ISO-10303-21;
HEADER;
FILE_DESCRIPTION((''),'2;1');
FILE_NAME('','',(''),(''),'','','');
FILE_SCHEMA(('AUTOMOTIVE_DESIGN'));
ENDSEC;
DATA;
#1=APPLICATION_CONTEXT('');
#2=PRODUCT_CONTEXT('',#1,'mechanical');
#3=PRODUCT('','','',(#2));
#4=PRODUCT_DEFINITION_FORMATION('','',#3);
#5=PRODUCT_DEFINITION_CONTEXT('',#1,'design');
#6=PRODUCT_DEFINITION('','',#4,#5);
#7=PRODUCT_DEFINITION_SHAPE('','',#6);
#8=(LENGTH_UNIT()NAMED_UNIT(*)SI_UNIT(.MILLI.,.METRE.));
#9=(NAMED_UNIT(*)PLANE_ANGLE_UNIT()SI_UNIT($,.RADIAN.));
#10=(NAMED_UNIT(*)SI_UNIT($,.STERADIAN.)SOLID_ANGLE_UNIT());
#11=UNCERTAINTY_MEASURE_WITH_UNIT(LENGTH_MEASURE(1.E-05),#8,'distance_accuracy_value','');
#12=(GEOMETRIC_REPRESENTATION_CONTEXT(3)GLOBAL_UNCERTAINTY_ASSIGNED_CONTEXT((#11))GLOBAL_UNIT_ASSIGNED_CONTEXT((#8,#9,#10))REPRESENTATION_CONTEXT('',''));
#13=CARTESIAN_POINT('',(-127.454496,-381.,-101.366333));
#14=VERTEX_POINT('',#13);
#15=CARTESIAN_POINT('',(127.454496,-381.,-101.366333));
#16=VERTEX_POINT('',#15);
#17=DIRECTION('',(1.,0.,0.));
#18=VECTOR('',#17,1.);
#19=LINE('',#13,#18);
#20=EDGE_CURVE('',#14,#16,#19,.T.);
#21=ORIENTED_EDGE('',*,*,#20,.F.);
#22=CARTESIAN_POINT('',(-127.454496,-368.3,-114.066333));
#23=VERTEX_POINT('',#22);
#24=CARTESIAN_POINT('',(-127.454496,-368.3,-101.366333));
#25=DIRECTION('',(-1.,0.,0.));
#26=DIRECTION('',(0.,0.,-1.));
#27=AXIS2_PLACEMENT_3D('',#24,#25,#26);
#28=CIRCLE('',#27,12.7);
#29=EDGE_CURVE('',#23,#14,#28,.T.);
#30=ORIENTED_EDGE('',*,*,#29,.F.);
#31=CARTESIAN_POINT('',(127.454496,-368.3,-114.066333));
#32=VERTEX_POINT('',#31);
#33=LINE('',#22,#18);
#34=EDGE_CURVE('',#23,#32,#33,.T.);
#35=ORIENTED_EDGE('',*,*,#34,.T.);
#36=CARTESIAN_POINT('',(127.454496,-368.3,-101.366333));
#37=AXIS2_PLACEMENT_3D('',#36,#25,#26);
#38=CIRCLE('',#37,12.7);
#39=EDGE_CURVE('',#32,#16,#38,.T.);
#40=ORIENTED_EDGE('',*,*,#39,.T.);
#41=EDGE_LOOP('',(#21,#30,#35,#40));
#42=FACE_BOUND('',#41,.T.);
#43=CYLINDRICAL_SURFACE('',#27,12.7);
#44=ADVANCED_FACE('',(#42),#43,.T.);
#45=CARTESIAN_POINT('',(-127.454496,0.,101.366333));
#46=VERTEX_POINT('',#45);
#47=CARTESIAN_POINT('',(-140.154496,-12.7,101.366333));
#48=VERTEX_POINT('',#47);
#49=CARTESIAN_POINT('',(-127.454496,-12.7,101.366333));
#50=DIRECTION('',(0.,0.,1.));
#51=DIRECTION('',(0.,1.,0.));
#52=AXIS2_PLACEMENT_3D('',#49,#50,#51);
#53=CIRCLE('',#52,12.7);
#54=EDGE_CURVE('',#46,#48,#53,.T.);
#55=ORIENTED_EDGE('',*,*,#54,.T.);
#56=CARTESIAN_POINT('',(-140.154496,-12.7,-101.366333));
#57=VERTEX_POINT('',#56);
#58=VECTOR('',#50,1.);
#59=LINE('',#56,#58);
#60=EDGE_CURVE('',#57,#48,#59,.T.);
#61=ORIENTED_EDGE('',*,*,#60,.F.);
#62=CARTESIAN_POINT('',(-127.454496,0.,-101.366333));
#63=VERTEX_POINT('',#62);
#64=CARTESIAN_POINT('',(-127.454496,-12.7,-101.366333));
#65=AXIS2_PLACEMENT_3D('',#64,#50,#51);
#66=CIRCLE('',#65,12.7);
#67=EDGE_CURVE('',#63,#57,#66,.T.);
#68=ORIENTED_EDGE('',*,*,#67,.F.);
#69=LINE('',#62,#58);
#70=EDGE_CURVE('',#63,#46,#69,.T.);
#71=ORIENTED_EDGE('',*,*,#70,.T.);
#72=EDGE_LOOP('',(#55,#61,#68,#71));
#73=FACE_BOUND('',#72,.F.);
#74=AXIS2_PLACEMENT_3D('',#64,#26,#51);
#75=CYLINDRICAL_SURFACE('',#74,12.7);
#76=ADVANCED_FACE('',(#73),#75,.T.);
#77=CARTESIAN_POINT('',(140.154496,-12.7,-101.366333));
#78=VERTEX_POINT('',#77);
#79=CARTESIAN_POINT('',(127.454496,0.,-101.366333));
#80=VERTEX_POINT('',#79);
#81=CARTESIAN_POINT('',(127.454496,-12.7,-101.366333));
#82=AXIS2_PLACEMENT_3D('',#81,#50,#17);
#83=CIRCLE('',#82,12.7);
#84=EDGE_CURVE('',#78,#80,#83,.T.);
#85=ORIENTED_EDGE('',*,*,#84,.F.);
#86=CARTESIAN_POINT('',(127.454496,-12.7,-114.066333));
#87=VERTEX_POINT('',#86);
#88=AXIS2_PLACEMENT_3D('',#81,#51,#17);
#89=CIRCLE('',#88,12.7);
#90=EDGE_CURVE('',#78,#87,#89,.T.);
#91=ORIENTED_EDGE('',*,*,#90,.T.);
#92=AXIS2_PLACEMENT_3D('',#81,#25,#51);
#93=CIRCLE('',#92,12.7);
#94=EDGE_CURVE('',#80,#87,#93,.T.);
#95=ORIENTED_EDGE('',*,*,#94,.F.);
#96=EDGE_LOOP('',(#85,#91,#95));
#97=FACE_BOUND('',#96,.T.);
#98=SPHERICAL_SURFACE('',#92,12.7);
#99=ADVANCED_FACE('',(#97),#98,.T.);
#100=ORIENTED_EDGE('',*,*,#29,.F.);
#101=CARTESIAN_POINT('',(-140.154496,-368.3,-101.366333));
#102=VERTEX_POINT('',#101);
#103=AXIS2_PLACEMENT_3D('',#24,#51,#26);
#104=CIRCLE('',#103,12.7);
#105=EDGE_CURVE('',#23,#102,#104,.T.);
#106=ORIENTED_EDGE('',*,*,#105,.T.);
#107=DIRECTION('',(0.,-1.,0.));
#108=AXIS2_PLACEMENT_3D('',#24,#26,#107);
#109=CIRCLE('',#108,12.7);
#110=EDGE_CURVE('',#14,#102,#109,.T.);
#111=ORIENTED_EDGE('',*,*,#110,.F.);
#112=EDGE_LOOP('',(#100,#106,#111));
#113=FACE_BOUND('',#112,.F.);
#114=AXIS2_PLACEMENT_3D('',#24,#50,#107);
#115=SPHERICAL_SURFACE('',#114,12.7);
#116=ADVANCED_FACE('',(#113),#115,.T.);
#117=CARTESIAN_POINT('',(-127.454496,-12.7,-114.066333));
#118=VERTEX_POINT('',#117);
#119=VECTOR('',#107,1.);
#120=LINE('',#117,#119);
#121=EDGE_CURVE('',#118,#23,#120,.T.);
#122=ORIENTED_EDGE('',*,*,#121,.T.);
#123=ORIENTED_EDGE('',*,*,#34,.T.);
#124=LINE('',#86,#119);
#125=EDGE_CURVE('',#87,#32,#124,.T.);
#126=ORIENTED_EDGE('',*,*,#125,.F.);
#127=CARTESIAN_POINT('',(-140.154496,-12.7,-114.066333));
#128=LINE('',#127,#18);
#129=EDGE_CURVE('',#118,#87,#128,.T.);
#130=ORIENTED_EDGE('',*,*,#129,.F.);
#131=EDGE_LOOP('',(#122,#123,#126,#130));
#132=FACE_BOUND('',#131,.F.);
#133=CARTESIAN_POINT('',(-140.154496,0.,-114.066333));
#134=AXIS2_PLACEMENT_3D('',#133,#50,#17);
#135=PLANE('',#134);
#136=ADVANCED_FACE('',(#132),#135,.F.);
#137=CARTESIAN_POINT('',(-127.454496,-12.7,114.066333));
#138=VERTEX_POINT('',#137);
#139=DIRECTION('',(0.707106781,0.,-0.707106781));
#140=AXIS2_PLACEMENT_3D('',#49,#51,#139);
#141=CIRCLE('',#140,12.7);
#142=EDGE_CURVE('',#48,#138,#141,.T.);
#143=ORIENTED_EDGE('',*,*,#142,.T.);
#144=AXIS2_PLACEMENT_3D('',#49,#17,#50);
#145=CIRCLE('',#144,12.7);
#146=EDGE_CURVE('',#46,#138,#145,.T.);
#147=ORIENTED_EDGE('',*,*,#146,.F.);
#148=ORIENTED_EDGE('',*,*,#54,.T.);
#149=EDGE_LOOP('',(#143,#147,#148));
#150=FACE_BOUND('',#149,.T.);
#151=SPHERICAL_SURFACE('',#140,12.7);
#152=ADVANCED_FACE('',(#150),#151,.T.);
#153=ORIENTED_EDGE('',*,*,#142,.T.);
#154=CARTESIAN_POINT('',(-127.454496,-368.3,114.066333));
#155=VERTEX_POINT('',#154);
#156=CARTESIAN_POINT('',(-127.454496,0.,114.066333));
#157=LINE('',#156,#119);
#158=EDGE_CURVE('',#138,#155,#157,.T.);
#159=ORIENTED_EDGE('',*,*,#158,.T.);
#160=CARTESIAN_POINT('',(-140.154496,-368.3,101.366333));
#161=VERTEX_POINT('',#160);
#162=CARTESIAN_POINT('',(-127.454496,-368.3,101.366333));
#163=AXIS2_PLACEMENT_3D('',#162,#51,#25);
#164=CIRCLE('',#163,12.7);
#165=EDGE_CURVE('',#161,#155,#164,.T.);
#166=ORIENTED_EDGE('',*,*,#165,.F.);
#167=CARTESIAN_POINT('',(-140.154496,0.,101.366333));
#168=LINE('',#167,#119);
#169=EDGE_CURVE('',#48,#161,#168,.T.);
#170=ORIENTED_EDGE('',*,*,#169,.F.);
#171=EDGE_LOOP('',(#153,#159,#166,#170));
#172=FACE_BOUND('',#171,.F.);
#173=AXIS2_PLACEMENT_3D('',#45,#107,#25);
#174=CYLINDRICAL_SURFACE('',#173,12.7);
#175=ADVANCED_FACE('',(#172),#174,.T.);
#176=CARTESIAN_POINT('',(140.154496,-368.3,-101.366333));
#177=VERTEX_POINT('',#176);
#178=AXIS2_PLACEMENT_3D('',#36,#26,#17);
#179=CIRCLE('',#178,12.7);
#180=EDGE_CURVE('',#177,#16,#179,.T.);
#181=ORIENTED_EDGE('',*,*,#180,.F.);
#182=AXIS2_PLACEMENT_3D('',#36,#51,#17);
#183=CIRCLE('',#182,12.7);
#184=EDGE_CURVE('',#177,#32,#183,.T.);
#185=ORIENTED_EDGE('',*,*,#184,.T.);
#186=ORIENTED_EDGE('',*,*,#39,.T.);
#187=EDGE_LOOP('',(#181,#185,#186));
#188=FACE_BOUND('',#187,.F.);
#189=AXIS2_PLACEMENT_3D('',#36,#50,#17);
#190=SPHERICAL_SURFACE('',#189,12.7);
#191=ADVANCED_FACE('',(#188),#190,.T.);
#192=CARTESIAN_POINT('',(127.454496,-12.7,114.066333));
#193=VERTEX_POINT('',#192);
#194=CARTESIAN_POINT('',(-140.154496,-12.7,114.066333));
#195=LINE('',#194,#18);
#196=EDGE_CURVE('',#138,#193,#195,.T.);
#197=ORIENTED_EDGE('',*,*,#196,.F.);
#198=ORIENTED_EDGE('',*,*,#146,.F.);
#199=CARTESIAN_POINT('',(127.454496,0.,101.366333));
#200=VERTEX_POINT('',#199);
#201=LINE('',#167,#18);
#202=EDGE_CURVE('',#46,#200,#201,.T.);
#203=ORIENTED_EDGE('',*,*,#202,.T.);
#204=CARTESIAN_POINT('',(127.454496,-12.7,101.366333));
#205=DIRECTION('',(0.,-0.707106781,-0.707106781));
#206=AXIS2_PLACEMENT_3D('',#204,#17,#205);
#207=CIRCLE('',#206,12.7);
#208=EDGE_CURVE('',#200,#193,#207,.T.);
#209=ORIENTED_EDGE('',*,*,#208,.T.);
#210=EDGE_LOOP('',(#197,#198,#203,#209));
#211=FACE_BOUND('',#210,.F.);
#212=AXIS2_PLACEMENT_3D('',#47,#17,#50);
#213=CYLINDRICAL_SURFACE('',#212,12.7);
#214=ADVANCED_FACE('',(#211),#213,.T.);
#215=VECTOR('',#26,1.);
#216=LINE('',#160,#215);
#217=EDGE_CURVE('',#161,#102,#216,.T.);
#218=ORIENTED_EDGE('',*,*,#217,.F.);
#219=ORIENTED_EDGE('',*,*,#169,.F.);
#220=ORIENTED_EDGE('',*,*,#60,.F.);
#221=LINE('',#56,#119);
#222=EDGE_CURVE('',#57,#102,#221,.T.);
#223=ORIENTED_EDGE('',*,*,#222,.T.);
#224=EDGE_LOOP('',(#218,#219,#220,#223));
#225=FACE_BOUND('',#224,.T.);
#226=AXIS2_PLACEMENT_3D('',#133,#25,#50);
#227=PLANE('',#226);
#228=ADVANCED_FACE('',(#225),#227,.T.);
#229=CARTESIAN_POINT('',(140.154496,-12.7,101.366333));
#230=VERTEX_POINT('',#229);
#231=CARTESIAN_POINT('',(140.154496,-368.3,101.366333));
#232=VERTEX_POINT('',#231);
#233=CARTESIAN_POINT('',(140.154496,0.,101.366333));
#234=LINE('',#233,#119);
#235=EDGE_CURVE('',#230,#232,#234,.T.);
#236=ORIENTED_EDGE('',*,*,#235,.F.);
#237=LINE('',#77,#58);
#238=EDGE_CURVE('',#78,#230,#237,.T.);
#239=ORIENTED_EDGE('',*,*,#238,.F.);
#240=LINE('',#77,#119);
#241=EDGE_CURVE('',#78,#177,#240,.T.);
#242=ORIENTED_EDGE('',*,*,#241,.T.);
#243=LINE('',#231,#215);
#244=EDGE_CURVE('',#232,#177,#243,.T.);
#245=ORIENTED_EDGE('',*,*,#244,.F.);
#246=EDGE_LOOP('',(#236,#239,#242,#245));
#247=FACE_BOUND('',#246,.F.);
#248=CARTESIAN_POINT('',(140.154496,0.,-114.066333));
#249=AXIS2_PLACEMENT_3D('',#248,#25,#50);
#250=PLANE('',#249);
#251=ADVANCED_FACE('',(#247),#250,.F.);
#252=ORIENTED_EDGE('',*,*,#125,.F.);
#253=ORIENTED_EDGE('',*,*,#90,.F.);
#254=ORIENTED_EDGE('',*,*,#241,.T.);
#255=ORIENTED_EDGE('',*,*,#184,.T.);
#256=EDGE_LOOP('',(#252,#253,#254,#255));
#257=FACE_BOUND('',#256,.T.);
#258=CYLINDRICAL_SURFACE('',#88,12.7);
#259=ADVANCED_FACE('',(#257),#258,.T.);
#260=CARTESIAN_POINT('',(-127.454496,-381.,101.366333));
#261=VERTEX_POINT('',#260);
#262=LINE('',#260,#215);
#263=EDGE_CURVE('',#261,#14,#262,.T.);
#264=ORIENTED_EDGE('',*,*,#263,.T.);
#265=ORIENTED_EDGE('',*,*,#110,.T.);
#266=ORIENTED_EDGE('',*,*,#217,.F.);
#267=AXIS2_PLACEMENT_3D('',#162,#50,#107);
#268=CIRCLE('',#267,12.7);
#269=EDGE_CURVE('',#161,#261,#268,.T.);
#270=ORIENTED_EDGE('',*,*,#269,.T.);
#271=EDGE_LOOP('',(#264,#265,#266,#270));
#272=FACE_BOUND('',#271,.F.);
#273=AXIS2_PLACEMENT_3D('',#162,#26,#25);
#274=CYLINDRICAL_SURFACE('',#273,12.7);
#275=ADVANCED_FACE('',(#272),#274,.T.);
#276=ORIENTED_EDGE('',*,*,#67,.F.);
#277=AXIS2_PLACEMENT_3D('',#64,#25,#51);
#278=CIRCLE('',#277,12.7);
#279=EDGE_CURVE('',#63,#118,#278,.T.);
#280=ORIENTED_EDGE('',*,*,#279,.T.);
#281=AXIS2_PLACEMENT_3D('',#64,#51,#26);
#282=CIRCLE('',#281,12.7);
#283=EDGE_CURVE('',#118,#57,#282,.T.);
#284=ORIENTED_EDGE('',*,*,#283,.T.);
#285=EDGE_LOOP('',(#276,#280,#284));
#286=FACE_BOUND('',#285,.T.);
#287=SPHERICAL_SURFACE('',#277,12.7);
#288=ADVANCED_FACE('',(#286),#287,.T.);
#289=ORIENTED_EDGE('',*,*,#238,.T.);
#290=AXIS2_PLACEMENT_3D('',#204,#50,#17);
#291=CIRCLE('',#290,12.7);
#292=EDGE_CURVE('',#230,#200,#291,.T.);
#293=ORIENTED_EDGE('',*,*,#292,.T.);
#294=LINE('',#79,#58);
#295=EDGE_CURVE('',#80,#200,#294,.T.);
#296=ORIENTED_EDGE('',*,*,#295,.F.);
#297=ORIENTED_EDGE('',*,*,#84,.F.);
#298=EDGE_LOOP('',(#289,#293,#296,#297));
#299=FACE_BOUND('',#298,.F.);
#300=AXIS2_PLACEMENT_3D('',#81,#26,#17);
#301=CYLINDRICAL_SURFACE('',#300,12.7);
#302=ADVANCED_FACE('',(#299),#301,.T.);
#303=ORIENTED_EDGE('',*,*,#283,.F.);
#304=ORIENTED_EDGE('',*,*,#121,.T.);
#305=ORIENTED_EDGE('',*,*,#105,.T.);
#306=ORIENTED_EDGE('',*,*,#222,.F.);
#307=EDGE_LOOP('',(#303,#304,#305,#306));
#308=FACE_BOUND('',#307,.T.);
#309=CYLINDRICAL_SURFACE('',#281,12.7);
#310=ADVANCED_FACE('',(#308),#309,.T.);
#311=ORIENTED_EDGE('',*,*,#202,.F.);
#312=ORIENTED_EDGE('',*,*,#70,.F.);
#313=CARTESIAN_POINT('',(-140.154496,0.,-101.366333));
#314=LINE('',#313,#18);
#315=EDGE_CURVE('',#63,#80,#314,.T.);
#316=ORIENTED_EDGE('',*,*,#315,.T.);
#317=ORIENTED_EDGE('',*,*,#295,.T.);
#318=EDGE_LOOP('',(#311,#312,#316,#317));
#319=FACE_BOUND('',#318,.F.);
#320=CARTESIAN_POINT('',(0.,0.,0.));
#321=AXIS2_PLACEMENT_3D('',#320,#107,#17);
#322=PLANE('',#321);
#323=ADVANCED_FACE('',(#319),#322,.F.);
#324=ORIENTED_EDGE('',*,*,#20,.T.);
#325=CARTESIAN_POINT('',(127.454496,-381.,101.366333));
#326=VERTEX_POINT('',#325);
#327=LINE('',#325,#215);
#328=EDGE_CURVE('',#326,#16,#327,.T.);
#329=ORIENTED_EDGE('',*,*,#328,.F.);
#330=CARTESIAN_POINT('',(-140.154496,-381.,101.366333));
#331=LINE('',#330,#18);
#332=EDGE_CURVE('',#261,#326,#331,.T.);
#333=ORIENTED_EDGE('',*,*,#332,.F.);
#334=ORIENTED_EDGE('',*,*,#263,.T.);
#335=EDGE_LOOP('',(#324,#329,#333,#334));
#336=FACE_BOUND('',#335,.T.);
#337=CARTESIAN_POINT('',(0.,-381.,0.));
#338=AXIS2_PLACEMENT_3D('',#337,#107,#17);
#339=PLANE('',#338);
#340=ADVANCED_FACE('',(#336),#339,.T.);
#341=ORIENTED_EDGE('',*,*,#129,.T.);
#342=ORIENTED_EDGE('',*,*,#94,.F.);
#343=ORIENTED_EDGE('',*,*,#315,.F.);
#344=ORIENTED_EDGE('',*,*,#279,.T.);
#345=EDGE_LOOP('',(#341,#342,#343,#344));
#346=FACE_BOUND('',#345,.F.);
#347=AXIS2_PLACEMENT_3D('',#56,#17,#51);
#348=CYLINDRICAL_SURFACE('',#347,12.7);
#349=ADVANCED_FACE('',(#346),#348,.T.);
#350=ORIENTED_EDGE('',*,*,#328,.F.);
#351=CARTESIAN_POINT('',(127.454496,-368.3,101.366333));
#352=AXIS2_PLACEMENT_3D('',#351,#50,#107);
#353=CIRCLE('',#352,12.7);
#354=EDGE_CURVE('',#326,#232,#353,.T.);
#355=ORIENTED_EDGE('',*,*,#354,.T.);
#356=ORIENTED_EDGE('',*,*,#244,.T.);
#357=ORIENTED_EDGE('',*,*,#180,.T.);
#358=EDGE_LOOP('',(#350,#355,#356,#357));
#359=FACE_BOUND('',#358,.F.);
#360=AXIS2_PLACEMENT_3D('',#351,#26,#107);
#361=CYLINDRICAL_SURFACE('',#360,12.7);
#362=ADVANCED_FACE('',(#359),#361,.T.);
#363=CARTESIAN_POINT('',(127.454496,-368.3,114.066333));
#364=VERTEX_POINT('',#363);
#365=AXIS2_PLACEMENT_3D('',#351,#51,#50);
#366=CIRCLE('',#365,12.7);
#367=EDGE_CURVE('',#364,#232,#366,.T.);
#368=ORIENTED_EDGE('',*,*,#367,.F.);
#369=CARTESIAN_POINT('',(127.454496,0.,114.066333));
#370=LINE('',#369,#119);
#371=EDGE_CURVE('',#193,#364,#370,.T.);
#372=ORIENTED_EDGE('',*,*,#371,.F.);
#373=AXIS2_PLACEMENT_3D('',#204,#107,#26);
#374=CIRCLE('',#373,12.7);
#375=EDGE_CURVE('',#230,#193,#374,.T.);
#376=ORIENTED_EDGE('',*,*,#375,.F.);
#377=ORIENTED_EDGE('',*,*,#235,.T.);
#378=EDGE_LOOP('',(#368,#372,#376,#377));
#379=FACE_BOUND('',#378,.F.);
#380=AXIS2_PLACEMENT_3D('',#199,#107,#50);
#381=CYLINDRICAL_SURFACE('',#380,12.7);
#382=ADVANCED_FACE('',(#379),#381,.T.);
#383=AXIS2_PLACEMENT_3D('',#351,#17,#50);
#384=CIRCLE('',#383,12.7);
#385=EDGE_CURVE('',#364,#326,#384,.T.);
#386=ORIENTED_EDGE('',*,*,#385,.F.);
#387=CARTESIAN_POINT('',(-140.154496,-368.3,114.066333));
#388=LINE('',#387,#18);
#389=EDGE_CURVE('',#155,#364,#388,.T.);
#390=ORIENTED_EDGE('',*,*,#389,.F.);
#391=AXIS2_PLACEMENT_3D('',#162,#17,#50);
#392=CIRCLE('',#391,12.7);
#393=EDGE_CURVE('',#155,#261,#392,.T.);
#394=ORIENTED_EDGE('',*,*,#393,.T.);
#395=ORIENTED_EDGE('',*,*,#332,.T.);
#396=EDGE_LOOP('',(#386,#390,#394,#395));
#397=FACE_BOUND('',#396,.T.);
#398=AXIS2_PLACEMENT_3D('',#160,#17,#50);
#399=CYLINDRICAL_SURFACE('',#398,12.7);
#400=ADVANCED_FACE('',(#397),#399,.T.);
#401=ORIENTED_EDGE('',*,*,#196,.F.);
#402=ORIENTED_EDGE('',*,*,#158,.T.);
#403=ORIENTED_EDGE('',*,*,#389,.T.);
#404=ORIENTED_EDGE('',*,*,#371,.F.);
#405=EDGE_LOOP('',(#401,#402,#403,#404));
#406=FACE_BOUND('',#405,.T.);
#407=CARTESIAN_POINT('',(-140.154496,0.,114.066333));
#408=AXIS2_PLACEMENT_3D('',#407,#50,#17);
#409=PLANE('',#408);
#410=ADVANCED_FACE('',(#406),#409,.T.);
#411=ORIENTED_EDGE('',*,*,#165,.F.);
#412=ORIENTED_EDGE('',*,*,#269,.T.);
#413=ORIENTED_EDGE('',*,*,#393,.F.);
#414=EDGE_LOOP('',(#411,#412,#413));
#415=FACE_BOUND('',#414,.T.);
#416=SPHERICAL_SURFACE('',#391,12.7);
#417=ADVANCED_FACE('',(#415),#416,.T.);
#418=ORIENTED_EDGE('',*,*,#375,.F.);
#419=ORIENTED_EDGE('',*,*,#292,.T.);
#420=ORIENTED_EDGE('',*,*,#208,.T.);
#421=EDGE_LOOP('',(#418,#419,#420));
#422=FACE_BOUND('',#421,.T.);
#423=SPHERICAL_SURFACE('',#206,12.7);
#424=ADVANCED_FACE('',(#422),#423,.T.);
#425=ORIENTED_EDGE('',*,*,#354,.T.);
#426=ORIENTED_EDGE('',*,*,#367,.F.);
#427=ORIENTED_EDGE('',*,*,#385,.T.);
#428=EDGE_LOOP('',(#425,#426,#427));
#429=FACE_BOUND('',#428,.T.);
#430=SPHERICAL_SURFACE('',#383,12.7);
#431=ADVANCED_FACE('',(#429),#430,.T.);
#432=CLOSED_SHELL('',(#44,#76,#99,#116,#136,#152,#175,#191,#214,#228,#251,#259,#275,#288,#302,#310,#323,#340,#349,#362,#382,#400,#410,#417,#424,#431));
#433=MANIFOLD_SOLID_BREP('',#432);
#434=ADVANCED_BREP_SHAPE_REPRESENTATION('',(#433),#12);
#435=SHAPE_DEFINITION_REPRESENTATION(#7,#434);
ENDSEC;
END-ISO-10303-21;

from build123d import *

# Parameters (mm, degrees)
F0_W         = 280.3089916706
F0_H         = 228.1326651573
F1_DEPTH     = 381
F2_R         = 12.7
F3_R         = 12.7
F4_R         = 12.7
F5_T1_DEPTH  = 202.7326651573
F5_T3_DEPTH  = 355.6
F5_T5_DEPTH  = 254.9089916706
F5_S9_W      = 12.7
F5_S9_H      = 12.7
F5_T10_DEPTH = 12.7
F5_S15_W     = 12.7
F5_S15_H     = 12.7
F5_T16_DEPTH = 12.7
F5_T20_ANGLE = 90
F5_T22_ANGLE = 90
F5_T24_ANGLE = 90
F5_T26_ANGLE = 90


# Not quite as in the source:
# - a fillet or chamfer that OpenCascade refuses, or shapes differently, is made with other operations: its cross-section is extruded or revolved along the edge and cut away or added


with BuildPart() as f1:
    # F0 (on Front) → F1 (new body)
    with BuildSketch(Plane.XZ):
        Rectangle(F0_W, F0_H)
    extrude(amount=F1_DEPTH)

    # F2
    f2_edges = [f1.edges().sort_by_distance(p)[0] for p in [
        (0, -381, 114.066333),
    ]]
    fillet(f2_edges, radius=F2_R)

    # F3
    f3_edges = [f1.edges().sort_by_distance(p)[0] for p in [
        (140.154496, -184.15, 114.066333),
        (0, 0, 114.066333),
        (-140.154496, -184.15, 114.066333),
    ]]
    fillet(f3_edges, radius=F3_R)

    # F4
    f4_edges = [f1.edges().sort_by_distance(p)[0] for p in [
        (0, 0, -114.066333),
    ]]
    fillet(f4_edges, radius=F4_R)

    # F5: fillet of radius 12.7 on 1 edges, made by hand

    # F5_s2 → F5_t1 (cut)
    with BuildSketch(Plane.XY.offset(-101.3663325787)):
        with BuildLine():
            ThreePointArc((-127.4544958353, 0), (-136.4347519564, -3.7197438789), (-140.1544958353, -12.7))
            Line((-140.1544958353, -12.7), (-140.1544958353, 0))
            Line((-140.1544958353, 0), (-127.4544958353, 0))
        make_face()
        with BuildLine():
            ThreePointArc((140.1544958353, -12.7), (136.4347519564, -3.7197438789), (127.4544958353, 0))
            Line((127.4544958353, 0), (140.1544958353, 0))
            Line((140.1544958353, 0), (140.1544958353, -12.7))
        make_face()
    extrude(amount=F5_T1_DEPTH, mode=Mode.SUBTRACT)

    # F5_s4 → F5_t3 (cut)
    with BuildSketch(Plane.XZ.offset(12.7)):
        with BuildLine():
            ThreePointArc((-127.4544958353, -114.0663325787), (-136.4347519564, -110.3465886997), (-140.1544958353, -101.3663325787))
            Line((-140.1544958353, -101.3663325787), (-140.1544958353, -114.0663325787))
            Line((-140.1544958353, -114.0663325787), (-127.4544958353, -114.0663325787))
        make_face()
        with BuildLine():
            ThreePointArc((140.1544958353, -101.3663325787), (136.4347519564, -110.3465886997), (127.4544958353, -114.0663325787))
            Line((127.4544958353, -114.0663325787), (140.1544958353, -114.0663325787))
            Line((140.1544958353, -114.0663325787), (140.1544958353, -101.3663325787))
        make_face()
    extrude(amount=F5_T3_DEPTH, mode=Mode.SUBTRACT)

    # F5_s6 → F5_t5 (cut)
    with BuildSketch(Plane.YZ.offset(-127.4544958353)):
        with BuildLine():
            ThreePointArc((-368.3, -114.0663325787), (-377.2802561211, -110.3465886997), (-381, -101.3663325787))
            Line((-381, -101.3663325787), (-381, -114.0663325787))
            Line((-381, -114.0663325787), (-368.3, -114.0663325787))
        make_face()
    extrude(amount=F5_T5_DEPTH, mode=Mode.SUBTRACT)


with BuildPart() as f5_tool8:
    # F5_s9 → F5_t10 (new body)
    with BuildSketch(Plane.XZ.offset(12.7)):
        with Locations((-133.8044958353, 107.7163325787)):
            Rectangle(F5_S9_W, F5_S9_H)
    extrude(amount=-F5_T10_DEPTH)

    # F5_s11 → F5_t12 (revolve, cut)
    with BuildSketch(Plane(origin=(-127.4544958353, -12.7, 101.3663325787), x_dir=(0.7071067812, 0, -0.7071067812), z_dir=(0.7071067812, 0, 0.7071067812))):
        with BuildLine():
            ThreePointArc((0, -12.7), (12.7, 0), (0, 12.7))
            Line((0, 12.7), (0, -12.7))
        make_face()
    revolve(axis=Axis((-127.4544958353, -12.7, 101.3663325787), (0, 1, 0)), mode=Mode.SUBTRACT)


with BuildPart() as f1_1:
    add(f1.part)

    # F5_t7: cut F5_tool8
    add(f5_tool8.part, mode=Mode.SUBTRACT)


with BuildPart() as f5_tool14:
    # F5_s15 → F5_t16 (new body)
    with BuildSketch(Plane.YZ.offset(127.4544958353)):
        with Locations((-6.35, 107.7163325787)):
            Rectangle(F5_S15_W, F5_S15_H)
    extrude(amount=F5_T16_DEPTH)

    # F5_s17 → F5_t18 (revolve, cut)
    with BuildSketch(Plane(origin=(127.4544958353, -12.7, 101.3663325787), x_dir=(0, -0.7071067812, -0.7071067812), z_dir=(0, -0.7071067812, 0.7071067812))):
        with BuildLine():
            ThreePointArc((0, -12.7), (12.7, 0), (0, 12.7))
            Line((0, 12.7), (0, -12.7))
        make_face()
    revolve(axis=Axis((127.4544958353, -12.7, 101.3663325787), (1, 0, 0)), mode=Mode.SUBTRACT)


with BuildPart() as f1_2:
    add(f1_1.part)

    # F5_t13: cut F5_tool14
    add(f5_tool14.part, mode=Mode.SUBTRACT)

    # F5_s19 → F5_t20 (revolve, cut)
    with BuildSketch(Plane.XY.offset(-101.3663325787)):
        with BuildLine():
            ThreePointArc((-127.4544958353, 0), (-136.4347519564, -3.7197438789), (-140.1544958353, -12.7))
            Line((-140.1544958353, -12.7), (-140.1544958353, 0))
            Line((-140.1544958353, 0), (-127.4544958353, 0))
        make_face()
    revolve(axis=Axis((-140.1544958353, -12.7, -101.3663325787), (-1, 0, 0)), revolution_arc=F5_T20_ANGLE, mode=Mode.SUBTRACT)

    # F5_s21 → F5_t22 (revolve, cut)
    with BuildSketch(Plane.YZ.offset(-127.4544958353)):
        with BuildLine():
            ThreePointArc((-368.3, -114.0663325787), (-377.2802561211, -110.3465886997), (-381, -101.3663325787))
            Line((-381, -101.3663325787), (-381, -114.0663325787))
            Line((-381, -114.0663325787), (-368.3, -114.0663325787))
        make_face()
    revolve(axis=Axis((-127.4544958353, -368.3, -114.0663325787), (0, 0, -1)), revolution_arc=F5_T22_ANGLE, mode=Mode.SUBTRACT)

    # F5_s23 → F5_t24 (revolve, cut)
    with BuildSketch(Plane.XZ.offset(368.3)):
        with BuildLine():
            ThreePointArc((127.4544958353, -114.0663325787), (136.4347519564, -110.3465886997), (140.1544958353, -101.3663325787))
            Line((140.1544958353, -101.3663325787), (140.1544958353, -114.0663325787))
            Line((140.1544958353, -114.0663325787), (127.4544958353, -114.0663325787))
        make_face()
    revolve(axis=Axis((127.4544958353, -368.3, -114.0663325787), (0, 0, -1)), revolution_arc=F5_T24_ANGLE, mode=Mode.SUBTRACT)

    # F5_s25 → F5_t26 (revolve, cut)
    with BuildSketch(Plane.XY.offset(-101.3663325787)):
        with BuildLine():
            ThreePointArc((140.1544958353, -12.7), (136.4347519564, -3.7197438789), (127.4544958353, 0))
            Line((127.4544958353, 0), (140.1544958353, 0))
            Line((140.1544958353, 0), (140.1544958353, -12.7))
        make_face()
    revolve(axis=Axis((140.1544958353, -12.7, -101.3663325787), (-1, 0, 0)), revolution_arc=F5_T26_ANGLE, mode=Mode.SUBTRACT)


solid = f1_2.part
